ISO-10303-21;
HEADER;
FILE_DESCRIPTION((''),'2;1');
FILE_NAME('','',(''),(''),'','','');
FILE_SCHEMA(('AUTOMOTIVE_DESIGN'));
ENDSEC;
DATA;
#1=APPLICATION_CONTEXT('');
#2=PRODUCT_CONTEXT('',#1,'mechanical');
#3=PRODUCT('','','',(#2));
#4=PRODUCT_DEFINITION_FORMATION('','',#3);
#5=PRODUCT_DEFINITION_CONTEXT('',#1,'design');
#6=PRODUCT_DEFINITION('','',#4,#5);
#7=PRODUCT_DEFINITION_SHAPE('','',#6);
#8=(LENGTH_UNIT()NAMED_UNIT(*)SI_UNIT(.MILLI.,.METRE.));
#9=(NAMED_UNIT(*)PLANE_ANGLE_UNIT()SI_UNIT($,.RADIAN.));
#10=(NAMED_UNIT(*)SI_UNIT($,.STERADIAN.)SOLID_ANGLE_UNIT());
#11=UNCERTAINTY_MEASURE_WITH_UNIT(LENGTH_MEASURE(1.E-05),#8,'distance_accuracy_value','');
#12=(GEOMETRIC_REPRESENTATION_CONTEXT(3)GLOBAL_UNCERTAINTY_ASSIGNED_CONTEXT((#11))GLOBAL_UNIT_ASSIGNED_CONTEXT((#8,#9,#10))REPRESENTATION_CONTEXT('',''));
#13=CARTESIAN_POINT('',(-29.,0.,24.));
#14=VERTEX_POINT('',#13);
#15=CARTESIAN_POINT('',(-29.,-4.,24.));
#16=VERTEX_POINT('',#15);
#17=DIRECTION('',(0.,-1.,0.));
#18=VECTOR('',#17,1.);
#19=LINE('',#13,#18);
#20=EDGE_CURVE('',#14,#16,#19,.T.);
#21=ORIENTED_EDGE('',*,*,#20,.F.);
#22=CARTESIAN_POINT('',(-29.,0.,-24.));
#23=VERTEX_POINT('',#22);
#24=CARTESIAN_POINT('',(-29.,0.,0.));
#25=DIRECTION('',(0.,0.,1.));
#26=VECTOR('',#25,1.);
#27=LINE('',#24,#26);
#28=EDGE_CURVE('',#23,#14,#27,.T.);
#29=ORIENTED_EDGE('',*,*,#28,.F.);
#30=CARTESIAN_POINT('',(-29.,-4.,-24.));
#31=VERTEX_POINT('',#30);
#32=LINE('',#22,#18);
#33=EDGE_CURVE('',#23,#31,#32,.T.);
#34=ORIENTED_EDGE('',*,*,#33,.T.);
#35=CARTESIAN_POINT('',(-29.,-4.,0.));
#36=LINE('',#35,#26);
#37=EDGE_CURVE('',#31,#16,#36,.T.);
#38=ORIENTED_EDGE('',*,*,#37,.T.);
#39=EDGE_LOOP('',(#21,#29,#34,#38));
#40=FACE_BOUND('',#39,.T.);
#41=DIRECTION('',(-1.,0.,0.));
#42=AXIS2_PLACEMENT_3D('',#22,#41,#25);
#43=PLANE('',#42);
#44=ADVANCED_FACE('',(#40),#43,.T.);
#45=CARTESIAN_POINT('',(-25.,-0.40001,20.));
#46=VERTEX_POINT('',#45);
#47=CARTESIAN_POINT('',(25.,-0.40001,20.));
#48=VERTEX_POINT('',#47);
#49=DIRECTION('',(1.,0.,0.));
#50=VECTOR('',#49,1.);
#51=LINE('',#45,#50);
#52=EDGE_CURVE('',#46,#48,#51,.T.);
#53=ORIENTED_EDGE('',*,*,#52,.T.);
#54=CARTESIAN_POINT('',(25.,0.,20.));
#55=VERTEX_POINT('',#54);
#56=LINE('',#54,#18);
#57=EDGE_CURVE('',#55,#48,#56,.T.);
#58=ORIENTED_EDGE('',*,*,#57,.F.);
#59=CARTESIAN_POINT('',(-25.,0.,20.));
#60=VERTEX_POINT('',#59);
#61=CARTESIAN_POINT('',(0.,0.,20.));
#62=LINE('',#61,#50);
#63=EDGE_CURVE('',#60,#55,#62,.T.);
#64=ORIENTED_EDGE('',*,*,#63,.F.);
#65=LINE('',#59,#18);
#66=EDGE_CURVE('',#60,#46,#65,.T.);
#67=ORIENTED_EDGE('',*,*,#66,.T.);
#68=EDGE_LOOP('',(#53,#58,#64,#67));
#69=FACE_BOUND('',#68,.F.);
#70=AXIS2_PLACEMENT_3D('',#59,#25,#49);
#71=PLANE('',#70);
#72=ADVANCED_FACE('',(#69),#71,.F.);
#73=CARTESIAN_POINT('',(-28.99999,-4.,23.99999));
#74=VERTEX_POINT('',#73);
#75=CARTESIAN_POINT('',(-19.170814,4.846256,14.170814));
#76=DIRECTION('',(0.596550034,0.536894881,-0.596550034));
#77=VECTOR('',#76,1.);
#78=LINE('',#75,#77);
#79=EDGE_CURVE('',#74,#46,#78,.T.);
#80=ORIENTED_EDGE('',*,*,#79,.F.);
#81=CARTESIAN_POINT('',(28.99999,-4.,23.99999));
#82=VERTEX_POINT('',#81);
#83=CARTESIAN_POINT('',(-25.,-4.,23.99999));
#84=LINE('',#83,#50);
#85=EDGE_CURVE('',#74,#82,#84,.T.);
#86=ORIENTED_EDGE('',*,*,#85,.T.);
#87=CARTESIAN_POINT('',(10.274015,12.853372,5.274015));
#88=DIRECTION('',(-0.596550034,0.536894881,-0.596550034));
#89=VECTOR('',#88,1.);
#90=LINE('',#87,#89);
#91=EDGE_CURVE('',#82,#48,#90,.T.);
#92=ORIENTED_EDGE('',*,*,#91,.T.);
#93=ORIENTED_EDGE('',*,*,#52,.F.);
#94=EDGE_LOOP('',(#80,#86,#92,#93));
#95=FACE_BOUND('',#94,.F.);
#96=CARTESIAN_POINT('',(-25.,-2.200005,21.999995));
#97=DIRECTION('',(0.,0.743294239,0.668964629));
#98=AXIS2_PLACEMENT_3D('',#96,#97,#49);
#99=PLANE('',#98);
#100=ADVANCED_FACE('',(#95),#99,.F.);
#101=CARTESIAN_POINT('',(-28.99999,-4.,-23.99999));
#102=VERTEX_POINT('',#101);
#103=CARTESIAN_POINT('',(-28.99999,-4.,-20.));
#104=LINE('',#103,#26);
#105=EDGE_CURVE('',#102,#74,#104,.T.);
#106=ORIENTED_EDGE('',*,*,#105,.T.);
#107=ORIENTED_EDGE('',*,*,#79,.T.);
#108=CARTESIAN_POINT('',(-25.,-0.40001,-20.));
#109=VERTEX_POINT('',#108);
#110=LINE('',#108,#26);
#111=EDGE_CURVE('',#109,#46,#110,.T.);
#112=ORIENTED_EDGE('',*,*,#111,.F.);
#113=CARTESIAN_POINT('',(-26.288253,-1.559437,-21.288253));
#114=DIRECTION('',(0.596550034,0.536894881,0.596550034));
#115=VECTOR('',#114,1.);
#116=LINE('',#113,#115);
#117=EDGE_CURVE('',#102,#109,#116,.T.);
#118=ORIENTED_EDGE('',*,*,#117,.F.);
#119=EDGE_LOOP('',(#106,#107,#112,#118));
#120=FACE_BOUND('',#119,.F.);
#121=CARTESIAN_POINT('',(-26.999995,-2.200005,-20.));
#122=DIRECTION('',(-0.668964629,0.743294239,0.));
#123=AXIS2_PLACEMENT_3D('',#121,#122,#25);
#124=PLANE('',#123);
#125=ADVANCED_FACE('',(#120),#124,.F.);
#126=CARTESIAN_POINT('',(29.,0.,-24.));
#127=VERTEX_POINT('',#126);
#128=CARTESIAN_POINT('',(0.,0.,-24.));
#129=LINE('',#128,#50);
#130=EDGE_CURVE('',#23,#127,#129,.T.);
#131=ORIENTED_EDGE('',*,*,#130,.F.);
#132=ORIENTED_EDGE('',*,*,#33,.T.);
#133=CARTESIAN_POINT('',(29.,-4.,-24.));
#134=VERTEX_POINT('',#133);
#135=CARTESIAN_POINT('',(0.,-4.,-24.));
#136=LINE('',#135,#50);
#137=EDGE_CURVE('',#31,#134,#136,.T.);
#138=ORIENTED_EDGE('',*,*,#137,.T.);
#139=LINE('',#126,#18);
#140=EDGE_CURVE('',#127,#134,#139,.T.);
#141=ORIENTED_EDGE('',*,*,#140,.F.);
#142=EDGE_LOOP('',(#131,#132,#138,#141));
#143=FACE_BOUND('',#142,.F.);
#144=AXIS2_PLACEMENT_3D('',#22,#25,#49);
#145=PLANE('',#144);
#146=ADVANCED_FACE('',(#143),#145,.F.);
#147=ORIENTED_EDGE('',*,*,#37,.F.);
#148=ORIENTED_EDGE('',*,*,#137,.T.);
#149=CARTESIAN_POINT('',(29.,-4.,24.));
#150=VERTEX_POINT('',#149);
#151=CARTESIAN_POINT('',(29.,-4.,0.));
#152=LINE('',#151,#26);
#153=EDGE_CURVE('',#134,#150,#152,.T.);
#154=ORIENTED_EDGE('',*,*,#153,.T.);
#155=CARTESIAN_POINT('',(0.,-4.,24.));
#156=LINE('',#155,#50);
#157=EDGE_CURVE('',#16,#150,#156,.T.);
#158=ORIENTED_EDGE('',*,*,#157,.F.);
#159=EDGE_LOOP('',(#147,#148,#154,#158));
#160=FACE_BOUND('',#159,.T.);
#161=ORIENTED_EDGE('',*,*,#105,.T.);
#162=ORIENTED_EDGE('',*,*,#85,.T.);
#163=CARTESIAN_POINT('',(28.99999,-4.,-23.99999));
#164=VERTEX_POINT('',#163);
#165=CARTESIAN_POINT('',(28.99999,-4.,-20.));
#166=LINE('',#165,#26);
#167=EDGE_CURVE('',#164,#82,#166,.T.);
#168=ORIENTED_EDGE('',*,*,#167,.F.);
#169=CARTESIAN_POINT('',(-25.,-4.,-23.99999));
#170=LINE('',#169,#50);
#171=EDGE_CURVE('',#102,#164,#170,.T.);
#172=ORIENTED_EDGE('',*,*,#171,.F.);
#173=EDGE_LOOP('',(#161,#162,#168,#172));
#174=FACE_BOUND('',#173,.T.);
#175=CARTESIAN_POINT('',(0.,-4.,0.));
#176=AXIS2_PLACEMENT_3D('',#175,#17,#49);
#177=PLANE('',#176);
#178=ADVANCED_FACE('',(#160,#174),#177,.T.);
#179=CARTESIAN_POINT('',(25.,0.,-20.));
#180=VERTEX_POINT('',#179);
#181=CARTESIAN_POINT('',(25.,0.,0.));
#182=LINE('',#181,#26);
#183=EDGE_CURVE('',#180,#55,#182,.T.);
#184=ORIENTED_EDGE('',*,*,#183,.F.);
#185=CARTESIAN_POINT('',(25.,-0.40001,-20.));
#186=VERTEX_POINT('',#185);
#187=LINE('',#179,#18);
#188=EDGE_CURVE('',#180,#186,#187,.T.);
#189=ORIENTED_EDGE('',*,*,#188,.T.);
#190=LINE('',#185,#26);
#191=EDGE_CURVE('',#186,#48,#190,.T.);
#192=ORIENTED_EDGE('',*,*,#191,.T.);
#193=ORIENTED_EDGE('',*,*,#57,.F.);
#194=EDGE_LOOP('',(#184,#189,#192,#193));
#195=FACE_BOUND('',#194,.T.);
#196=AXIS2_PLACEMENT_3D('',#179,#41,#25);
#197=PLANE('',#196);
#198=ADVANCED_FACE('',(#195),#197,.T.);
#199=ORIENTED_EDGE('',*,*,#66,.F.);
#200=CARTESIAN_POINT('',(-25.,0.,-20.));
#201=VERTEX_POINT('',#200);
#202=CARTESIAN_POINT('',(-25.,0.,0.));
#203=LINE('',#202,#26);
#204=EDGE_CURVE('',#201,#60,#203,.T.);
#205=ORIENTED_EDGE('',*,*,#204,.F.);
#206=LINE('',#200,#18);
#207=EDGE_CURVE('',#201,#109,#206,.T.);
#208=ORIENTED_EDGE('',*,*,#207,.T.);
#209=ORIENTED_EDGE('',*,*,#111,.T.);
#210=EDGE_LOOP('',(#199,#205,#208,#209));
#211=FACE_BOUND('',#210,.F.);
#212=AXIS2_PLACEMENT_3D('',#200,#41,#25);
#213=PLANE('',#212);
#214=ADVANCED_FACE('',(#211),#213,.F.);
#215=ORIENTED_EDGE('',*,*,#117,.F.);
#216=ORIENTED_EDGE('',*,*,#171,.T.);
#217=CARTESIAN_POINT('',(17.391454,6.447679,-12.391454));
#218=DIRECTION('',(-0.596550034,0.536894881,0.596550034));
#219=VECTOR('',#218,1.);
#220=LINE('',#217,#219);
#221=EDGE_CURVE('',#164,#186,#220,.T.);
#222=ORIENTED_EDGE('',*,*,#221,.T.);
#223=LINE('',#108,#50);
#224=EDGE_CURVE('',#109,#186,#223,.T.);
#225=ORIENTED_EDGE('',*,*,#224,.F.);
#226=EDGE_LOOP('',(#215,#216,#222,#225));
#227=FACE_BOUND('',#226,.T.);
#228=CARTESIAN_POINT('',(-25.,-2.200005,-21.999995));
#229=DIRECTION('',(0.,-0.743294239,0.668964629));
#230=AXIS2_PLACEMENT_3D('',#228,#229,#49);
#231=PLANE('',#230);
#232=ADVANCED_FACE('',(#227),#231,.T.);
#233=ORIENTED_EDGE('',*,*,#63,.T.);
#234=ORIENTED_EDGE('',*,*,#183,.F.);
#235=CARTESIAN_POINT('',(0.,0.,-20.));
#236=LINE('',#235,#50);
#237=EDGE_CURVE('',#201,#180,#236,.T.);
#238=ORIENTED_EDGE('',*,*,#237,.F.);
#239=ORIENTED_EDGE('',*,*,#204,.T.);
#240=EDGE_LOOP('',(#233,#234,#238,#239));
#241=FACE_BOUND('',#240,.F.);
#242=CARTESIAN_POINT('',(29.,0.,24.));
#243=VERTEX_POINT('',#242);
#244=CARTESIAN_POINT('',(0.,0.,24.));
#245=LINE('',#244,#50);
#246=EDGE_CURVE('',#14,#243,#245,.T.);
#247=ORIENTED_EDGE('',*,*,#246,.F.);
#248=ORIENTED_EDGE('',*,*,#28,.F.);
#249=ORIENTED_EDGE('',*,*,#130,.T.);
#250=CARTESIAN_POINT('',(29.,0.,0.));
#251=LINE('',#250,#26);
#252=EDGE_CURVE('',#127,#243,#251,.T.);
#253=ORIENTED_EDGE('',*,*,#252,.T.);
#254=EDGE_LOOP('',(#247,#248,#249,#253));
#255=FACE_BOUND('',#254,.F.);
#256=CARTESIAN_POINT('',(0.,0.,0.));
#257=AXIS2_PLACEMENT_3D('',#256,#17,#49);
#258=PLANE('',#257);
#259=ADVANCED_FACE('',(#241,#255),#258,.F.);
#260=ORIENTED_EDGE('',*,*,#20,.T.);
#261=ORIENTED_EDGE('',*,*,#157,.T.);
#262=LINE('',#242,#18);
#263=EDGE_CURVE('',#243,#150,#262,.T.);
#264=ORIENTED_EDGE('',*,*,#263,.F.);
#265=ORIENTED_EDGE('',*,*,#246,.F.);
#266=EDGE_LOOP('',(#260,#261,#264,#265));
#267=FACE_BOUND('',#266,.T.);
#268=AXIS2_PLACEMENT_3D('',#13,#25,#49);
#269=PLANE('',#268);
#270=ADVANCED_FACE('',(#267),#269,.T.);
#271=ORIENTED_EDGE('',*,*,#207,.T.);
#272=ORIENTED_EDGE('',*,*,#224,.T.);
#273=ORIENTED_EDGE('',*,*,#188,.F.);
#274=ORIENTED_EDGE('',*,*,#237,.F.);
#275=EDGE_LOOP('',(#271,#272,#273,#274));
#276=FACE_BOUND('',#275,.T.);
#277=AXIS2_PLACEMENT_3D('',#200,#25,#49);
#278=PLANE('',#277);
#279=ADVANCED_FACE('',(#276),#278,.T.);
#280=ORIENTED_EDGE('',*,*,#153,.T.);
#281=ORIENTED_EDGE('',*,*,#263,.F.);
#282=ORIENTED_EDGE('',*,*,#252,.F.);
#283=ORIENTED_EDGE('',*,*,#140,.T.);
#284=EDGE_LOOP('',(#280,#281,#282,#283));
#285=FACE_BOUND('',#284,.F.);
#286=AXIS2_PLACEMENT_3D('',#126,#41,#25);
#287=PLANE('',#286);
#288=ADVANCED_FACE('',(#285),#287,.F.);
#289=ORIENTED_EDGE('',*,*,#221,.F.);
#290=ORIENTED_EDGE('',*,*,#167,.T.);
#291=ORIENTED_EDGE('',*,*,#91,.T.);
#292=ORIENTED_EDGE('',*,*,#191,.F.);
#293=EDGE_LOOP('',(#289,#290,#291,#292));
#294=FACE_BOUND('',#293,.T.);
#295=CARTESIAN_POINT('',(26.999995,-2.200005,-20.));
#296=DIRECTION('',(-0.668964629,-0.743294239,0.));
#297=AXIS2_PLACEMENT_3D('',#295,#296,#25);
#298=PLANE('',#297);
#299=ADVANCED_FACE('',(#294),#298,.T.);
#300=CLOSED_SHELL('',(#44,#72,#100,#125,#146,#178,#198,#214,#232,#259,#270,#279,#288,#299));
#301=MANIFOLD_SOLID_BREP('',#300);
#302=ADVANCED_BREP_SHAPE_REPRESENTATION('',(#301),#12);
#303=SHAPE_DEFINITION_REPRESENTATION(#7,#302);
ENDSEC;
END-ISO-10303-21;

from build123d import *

# Parameters (mm, degrees)
F1_W     = 58
F1_H     = 48
F1_W_2   = 50
F1_H_2   = 40
F2_DEPTH = 4
F3_SIZE2 = 3.59999
F3_SIZE  = 3.99999


# Not quite as in the source:
# - a fillet or chamfer is up to 0.001 mm smaller than in the source, because OpenCascade refuses the exact size


with BuildPart() as f2:
    # F1 (on Front) → F2 (new body)
    with BuildSketch(Plane.XZ):
        Rectangle(F1_W, F1_H)
        Rectangle(F1_W_2, F1_H_2, mode=Mode.SUBTRACT)
    extrude(amount=F2_DEPTH)

    # F3 (size 4 and 3.6 in the source; OpenCascade refuses exactly that, so slightly less here)
    f3_edges = [f2.edges().sort_by_distance(p)[0] for p in [
        (-25, -4, 0),
        (0, -4, 20),
        (25, -4, 0),
        (0, -4, -20),
    ]]
    f3_side = f2.faces().sort_by_distance((28.247139, -4, 0))[0]
    chamfer(f3_edges, length=F3_SIZE, length2=F3_SIZE2, reference=f3_side)


solid = f2.part
